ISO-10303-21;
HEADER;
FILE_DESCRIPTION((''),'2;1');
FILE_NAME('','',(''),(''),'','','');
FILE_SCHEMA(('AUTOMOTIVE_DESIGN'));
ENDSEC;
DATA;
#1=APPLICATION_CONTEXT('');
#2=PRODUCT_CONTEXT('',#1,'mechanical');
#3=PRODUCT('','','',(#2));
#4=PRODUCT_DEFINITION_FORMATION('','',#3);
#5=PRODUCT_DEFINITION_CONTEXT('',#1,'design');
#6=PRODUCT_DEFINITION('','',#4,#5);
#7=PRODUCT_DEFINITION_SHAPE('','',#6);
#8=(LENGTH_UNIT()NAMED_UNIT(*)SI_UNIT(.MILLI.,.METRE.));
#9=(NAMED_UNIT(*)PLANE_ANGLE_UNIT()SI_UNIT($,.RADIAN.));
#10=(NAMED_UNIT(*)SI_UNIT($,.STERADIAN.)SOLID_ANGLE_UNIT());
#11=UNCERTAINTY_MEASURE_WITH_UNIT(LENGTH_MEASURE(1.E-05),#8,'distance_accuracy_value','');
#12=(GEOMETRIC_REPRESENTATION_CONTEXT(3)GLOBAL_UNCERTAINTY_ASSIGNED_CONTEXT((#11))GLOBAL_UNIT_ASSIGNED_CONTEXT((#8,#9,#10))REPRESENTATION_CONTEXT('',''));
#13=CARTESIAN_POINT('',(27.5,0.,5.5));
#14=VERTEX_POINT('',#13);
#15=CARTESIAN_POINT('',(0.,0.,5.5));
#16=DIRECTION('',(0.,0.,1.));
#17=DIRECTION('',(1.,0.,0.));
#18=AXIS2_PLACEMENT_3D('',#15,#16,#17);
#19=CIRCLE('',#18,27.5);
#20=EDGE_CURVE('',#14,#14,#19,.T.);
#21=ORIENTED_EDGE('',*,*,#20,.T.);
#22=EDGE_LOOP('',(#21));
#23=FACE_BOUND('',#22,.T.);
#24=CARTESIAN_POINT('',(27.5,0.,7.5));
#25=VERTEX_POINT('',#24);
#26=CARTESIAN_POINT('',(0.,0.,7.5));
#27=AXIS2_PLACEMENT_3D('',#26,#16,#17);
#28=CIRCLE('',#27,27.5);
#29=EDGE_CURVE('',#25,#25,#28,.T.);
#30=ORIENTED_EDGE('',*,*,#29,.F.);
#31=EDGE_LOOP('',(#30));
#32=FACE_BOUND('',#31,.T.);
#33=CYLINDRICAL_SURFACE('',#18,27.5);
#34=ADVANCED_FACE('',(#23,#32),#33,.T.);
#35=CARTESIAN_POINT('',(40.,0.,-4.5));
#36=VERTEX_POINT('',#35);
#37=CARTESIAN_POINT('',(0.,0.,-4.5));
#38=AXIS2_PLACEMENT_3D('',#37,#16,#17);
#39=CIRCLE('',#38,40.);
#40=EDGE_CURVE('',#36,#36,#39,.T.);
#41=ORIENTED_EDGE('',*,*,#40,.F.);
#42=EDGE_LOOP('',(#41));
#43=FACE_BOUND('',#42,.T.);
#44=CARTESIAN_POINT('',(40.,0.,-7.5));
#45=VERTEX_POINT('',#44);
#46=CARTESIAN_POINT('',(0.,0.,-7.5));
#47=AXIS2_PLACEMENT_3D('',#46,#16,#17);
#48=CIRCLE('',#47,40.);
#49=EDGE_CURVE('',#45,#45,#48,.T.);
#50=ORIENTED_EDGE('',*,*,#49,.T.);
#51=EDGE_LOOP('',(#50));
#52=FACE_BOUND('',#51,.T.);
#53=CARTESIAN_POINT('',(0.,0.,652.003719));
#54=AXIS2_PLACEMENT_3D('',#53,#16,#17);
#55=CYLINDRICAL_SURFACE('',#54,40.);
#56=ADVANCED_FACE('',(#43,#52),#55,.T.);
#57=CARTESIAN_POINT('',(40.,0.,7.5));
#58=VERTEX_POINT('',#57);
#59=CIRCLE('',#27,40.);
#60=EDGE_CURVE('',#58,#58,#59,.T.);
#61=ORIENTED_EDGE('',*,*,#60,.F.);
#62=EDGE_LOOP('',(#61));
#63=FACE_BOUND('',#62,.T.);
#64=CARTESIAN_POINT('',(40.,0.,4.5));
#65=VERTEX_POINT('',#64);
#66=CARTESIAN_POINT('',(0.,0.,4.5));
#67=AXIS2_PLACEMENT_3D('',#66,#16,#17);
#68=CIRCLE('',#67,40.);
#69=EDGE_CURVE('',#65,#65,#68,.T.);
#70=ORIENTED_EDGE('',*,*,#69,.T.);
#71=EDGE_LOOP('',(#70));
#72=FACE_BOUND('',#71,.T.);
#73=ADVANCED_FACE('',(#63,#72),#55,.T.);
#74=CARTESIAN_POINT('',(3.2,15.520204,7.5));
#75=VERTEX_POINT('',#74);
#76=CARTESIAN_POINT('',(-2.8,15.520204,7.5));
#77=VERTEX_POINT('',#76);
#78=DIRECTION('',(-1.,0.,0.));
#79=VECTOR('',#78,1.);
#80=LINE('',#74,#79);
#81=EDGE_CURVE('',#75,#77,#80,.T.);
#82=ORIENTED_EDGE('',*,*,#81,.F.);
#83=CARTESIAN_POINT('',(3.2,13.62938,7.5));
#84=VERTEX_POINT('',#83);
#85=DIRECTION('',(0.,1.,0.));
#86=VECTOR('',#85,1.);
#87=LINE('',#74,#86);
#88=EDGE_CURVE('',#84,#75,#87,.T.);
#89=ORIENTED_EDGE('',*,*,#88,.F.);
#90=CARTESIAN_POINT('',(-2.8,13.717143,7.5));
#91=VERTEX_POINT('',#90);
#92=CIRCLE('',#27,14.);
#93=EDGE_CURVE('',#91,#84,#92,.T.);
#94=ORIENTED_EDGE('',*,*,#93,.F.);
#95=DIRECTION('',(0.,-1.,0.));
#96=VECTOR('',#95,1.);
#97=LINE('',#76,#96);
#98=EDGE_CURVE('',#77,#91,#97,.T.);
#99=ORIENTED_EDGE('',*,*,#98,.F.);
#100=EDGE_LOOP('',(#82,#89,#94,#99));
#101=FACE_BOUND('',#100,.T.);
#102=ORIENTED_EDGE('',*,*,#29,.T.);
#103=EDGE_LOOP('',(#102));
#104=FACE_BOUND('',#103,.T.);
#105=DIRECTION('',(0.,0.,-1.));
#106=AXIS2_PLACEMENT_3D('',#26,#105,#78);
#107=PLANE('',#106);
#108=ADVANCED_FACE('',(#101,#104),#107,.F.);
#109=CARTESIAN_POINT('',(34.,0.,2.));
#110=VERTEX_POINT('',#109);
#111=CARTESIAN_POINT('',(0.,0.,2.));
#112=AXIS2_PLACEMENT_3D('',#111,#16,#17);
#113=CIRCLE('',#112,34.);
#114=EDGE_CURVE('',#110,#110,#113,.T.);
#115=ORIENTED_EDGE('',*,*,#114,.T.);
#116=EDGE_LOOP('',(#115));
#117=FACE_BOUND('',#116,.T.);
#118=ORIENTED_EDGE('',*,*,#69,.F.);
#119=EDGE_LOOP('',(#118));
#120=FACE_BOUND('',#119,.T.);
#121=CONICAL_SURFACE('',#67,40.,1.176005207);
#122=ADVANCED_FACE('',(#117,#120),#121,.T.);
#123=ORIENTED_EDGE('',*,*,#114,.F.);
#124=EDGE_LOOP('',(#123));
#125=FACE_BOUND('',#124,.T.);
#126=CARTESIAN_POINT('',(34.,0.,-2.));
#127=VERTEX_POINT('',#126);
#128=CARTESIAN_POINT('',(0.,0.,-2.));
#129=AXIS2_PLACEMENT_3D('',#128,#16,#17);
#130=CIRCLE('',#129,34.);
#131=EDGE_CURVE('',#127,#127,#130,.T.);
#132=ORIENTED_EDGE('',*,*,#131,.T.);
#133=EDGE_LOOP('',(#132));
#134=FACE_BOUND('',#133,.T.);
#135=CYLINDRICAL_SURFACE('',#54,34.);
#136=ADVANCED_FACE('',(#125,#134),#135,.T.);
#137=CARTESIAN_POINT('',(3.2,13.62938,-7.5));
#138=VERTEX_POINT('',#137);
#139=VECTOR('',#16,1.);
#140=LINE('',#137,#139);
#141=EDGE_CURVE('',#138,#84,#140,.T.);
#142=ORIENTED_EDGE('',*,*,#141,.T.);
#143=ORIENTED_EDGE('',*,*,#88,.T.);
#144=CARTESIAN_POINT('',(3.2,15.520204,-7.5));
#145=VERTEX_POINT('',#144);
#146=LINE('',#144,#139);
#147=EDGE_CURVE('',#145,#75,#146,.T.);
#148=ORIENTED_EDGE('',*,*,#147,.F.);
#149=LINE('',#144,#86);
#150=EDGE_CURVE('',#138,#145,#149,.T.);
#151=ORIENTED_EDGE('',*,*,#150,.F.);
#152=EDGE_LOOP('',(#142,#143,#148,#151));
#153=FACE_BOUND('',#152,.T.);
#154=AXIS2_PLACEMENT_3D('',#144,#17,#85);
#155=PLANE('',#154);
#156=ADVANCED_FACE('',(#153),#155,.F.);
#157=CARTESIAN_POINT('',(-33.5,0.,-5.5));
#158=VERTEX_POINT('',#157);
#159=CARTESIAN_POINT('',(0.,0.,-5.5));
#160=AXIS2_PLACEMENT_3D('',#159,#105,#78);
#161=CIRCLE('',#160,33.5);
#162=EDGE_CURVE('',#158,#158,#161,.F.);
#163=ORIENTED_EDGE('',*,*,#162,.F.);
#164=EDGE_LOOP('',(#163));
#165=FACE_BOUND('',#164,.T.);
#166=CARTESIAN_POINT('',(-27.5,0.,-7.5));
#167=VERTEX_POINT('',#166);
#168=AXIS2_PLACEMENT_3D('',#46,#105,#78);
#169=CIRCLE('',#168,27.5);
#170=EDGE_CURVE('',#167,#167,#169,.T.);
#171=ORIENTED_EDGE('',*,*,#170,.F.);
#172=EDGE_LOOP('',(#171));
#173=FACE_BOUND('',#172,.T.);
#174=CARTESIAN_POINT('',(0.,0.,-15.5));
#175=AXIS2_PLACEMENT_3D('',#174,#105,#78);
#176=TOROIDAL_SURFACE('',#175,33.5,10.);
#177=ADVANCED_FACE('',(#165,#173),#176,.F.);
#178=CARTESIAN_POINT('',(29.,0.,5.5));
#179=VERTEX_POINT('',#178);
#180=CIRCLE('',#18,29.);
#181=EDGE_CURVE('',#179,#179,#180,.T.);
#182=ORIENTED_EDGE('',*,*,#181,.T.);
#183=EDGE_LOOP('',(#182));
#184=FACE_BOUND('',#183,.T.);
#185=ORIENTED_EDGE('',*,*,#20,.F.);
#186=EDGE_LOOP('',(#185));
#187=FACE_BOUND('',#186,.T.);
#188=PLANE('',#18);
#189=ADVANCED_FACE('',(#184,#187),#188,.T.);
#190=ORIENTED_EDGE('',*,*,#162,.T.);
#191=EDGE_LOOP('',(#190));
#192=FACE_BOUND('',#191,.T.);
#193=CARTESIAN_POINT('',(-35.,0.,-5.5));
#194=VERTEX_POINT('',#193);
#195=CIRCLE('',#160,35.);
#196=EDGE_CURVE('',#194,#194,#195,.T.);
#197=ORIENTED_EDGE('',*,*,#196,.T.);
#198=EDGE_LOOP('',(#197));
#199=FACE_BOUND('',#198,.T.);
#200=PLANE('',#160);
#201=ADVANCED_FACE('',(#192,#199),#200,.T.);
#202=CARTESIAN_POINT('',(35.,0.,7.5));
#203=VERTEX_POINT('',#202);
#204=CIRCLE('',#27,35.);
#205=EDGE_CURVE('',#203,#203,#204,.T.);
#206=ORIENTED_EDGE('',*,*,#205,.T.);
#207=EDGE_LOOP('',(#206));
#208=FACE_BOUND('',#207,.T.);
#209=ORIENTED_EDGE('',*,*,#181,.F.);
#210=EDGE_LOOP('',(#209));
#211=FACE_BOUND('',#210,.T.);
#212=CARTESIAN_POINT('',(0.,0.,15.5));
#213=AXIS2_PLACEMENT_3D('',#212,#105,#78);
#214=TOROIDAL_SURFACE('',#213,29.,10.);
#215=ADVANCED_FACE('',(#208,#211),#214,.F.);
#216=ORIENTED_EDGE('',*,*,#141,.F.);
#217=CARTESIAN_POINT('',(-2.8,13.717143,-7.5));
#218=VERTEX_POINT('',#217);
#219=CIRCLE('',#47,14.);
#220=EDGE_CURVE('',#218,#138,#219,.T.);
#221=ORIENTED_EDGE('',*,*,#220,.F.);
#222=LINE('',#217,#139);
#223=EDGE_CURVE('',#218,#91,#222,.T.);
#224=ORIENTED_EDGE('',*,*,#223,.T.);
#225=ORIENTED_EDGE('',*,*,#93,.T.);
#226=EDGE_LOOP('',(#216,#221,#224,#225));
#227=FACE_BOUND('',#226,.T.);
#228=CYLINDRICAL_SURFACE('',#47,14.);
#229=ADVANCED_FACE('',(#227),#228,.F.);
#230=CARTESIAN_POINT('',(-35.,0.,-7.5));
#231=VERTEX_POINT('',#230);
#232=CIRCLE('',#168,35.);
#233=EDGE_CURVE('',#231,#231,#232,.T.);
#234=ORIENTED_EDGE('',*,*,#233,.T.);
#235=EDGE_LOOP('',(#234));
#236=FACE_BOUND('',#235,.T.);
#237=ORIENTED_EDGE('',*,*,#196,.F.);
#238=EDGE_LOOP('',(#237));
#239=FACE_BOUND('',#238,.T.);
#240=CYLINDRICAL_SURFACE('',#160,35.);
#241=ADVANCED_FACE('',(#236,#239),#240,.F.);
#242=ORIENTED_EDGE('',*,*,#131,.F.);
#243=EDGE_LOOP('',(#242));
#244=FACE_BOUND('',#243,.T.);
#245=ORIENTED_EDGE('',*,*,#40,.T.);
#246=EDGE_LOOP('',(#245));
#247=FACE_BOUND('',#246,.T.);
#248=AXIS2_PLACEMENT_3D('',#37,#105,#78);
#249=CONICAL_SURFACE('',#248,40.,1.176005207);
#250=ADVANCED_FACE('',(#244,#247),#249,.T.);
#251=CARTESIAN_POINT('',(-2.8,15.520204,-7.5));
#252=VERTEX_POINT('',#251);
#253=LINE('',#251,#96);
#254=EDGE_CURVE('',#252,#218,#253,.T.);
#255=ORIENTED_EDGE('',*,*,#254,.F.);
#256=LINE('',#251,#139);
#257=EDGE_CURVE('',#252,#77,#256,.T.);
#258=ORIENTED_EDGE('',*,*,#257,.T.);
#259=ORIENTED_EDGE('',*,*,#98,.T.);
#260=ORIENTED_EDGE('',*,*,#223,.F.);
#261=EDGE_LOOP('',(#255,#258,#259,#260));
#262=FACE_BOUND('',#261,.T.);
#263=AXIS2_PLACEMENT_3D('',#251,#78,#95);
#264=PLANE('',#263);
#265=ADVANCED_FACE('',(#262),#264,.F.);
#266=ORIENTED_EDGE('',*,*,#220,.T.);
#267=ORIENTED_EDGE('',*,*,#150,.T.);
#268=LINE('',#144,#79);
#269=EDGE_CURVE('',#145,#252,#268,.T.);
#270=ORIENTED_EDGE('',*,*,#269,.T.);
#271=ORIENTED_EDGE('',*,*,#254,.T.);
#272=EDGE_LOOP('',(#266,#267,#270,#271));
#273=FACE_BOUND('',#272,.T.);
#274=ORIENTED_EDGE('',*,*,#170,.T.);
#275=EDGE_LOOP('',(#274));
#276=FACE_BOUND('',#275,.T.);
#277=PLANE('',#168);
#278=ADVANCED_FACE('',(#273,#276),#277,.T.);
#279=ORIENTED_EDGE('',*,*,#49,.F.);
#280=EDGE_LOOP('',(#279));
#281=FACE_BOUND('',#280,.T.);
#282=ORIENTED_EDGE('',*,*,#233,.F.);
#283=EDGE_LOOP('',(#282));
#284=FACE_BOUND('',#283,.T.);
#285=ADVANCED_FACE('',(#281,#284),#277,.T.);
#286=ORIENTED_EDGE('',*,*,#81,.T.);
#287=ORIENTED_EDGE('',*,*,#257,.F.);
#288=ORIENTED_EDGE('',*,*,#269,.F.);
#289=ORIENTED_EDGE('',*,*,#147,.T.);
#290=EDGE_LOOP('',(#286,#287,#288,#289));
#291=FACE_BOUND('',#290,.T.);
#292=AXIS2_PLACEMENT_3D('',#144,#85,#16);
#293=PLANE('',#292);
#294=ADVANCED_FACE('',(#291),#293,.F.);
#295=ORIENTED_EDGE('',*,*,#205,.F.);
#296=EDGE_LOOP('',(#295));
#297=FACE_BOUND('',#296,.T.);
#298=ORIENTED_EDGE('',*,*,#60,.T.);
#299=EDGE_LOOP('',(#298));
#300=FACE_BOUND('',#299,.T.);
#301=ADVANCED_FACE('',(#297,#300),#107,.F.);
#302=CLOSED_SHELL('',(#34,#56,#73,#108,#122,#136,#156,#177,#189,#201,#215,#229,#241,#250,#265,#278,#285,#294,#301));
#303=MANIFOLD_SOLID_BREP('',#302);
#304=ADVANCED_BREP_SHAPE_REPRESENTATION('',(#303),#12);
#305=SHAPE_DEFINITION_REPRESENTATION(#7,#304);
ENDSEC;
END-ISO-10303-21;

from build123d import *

# Parameters (mm, degrees)
CUT_EXTRUDE1_DEPTH = 59.523499554
SKETCH3_R          = 35
SKETCH3_R_2        = 27.5
CUT_EXTRUDE2_DEPTH = 2
CUT_EXTRUDE3_START = -2
SKETCH4_R          = 35
SKETCH4_R_2        = 27.5
CUT_EXTRUDE3_DEPTH = 2
FILLET1_R          = 10
FILLET2_R          = 10


with BuildPart() as part:
    # Sketch1 → Revolve1 (revolve)
    with BuildSketch(Plane(origin=(0, 0, 0), x_dir=(0, 0, -1), z_dir=(1, 0, 0)), mode=Mode.PRIVATE) as revolve1_sk:
        Polygon((-7.5, 40), (-4.5, 40), (-2, 34), (2, 34), (4.5, 40), (7.5, 40), (7.5, 0), (-7.5, 0), align=None)
    revolve(revolve1_sk.sketch.rotate(Axis((0, 0, 652.003718611), (0, 0, -1)), 90), axis=Axis((0, 0, 652.003718611), (0, 0, -1)))

    # Sketch2 → Cut-Extrude1 (cut, through all)
    with BuildSketch(Plane.XY.offset(7.5)):
        with BuildLine():
            Line((3.2, 15.520204103), (-2.8, 15.520204103))
            Line((-2.8, 15.520204103), (-2.8, 13.71714256))
            ThreePointArc((-2.8, 13.71714256), (-0.204757333, -13.998502578), (3.2, 13.62938003))
            Line((3.2, 13.62938003), (3.2, 15.520204103))
        make_face()
    extrude(amount=-CUT_EXTRUDE1_DEPTH, mode=Mode.SUBTRACT)

    # Sketch3 → Cut-Extrude2 (cut)
    with BuildSketch(Plane.XY.offset(7.5)):
        Circle(SKETCH3_R)
        Circle(SKETCH3_R_2, mode=Mode.SUBTRACT)
    extrude(amount=-CUT_EXTRUDE2_DEPTH, mode=Mode.SUBTRACT)

    # Sketch4 → Cut-Extrude3 (cut)
    with BuildSketch(Plane(origin=(0, 0, -7.5), x_dir=(-1, 0, 0), z_dir=(0, 0, -1)).offset(CUT_EXTRUDE3_START)):
        with Locations(Location((0, 0, 0), (0, 0, 180))):
            Circle(SKETCH4_R)
        with Locations(Location((0, 0, 0), (0, 0, 180))):
            Circle(SKETCH4_R_2, mode=Mode.SUBTRACT)
    extrude(amount=CUT_EXTRUDE3_DEPTH, mode=Mode.SUBTRACT)

    # Fillet1
    # the kernel refuses this fillet: 10 mm, written as the material it adds along each edge
    with BuildSketch(Plane(origin=(0, 0, 5.5), x_dir=(1, 0, 0), z_dir=(0, -1, 0))) as fillet1_piece_1:
        with BuildLine():
            CenterArc((29, 10), FILLET1_R, 270, 36.869897646)
            Line((29, 0), (29, -0.2))
            Line((29, -0.2), (35, -0.2))
            Line((35, -0.2), (35.2, 0))
            ThreePointArc((35.2, 0), (35.2, 1), (35.12, 1.84))
            Line((35.12, 1.84), (35, 2))
        make_face()
    revolve(axis=Axis((0, 0, 5.5), (0, 0, 1)))

    # Fillet2
    # the kernel refuses this fillet: 10 mm, written as the material it adds along each edge
    with BuildSketch(Plane(origin=(0, 0, -5.5), x_dir=(1, 0, 0), z_dir=(0, 1, 0))) as fillet2_piece_1:
        with BuildLine():
            CenterArc((33.5, 10), FILLET2_R, 233.130102354, 36.869897646)
            Line((33.5, 0), (33.5, -0.2))
            Line((33.5, -0.2), (27.5, -0.2))
            Line((27.5, -0.2), (27.3, 0))
            ThreePointArc((27.3, 0), (27.3, 1), (27.38, 1.84))
            Line((27.38, 1.84), (27.5, 2))
        make_face()
    revolve(axis=Axis((0, 0, -5.5), (0, 0, -1)))


solid = part.part
